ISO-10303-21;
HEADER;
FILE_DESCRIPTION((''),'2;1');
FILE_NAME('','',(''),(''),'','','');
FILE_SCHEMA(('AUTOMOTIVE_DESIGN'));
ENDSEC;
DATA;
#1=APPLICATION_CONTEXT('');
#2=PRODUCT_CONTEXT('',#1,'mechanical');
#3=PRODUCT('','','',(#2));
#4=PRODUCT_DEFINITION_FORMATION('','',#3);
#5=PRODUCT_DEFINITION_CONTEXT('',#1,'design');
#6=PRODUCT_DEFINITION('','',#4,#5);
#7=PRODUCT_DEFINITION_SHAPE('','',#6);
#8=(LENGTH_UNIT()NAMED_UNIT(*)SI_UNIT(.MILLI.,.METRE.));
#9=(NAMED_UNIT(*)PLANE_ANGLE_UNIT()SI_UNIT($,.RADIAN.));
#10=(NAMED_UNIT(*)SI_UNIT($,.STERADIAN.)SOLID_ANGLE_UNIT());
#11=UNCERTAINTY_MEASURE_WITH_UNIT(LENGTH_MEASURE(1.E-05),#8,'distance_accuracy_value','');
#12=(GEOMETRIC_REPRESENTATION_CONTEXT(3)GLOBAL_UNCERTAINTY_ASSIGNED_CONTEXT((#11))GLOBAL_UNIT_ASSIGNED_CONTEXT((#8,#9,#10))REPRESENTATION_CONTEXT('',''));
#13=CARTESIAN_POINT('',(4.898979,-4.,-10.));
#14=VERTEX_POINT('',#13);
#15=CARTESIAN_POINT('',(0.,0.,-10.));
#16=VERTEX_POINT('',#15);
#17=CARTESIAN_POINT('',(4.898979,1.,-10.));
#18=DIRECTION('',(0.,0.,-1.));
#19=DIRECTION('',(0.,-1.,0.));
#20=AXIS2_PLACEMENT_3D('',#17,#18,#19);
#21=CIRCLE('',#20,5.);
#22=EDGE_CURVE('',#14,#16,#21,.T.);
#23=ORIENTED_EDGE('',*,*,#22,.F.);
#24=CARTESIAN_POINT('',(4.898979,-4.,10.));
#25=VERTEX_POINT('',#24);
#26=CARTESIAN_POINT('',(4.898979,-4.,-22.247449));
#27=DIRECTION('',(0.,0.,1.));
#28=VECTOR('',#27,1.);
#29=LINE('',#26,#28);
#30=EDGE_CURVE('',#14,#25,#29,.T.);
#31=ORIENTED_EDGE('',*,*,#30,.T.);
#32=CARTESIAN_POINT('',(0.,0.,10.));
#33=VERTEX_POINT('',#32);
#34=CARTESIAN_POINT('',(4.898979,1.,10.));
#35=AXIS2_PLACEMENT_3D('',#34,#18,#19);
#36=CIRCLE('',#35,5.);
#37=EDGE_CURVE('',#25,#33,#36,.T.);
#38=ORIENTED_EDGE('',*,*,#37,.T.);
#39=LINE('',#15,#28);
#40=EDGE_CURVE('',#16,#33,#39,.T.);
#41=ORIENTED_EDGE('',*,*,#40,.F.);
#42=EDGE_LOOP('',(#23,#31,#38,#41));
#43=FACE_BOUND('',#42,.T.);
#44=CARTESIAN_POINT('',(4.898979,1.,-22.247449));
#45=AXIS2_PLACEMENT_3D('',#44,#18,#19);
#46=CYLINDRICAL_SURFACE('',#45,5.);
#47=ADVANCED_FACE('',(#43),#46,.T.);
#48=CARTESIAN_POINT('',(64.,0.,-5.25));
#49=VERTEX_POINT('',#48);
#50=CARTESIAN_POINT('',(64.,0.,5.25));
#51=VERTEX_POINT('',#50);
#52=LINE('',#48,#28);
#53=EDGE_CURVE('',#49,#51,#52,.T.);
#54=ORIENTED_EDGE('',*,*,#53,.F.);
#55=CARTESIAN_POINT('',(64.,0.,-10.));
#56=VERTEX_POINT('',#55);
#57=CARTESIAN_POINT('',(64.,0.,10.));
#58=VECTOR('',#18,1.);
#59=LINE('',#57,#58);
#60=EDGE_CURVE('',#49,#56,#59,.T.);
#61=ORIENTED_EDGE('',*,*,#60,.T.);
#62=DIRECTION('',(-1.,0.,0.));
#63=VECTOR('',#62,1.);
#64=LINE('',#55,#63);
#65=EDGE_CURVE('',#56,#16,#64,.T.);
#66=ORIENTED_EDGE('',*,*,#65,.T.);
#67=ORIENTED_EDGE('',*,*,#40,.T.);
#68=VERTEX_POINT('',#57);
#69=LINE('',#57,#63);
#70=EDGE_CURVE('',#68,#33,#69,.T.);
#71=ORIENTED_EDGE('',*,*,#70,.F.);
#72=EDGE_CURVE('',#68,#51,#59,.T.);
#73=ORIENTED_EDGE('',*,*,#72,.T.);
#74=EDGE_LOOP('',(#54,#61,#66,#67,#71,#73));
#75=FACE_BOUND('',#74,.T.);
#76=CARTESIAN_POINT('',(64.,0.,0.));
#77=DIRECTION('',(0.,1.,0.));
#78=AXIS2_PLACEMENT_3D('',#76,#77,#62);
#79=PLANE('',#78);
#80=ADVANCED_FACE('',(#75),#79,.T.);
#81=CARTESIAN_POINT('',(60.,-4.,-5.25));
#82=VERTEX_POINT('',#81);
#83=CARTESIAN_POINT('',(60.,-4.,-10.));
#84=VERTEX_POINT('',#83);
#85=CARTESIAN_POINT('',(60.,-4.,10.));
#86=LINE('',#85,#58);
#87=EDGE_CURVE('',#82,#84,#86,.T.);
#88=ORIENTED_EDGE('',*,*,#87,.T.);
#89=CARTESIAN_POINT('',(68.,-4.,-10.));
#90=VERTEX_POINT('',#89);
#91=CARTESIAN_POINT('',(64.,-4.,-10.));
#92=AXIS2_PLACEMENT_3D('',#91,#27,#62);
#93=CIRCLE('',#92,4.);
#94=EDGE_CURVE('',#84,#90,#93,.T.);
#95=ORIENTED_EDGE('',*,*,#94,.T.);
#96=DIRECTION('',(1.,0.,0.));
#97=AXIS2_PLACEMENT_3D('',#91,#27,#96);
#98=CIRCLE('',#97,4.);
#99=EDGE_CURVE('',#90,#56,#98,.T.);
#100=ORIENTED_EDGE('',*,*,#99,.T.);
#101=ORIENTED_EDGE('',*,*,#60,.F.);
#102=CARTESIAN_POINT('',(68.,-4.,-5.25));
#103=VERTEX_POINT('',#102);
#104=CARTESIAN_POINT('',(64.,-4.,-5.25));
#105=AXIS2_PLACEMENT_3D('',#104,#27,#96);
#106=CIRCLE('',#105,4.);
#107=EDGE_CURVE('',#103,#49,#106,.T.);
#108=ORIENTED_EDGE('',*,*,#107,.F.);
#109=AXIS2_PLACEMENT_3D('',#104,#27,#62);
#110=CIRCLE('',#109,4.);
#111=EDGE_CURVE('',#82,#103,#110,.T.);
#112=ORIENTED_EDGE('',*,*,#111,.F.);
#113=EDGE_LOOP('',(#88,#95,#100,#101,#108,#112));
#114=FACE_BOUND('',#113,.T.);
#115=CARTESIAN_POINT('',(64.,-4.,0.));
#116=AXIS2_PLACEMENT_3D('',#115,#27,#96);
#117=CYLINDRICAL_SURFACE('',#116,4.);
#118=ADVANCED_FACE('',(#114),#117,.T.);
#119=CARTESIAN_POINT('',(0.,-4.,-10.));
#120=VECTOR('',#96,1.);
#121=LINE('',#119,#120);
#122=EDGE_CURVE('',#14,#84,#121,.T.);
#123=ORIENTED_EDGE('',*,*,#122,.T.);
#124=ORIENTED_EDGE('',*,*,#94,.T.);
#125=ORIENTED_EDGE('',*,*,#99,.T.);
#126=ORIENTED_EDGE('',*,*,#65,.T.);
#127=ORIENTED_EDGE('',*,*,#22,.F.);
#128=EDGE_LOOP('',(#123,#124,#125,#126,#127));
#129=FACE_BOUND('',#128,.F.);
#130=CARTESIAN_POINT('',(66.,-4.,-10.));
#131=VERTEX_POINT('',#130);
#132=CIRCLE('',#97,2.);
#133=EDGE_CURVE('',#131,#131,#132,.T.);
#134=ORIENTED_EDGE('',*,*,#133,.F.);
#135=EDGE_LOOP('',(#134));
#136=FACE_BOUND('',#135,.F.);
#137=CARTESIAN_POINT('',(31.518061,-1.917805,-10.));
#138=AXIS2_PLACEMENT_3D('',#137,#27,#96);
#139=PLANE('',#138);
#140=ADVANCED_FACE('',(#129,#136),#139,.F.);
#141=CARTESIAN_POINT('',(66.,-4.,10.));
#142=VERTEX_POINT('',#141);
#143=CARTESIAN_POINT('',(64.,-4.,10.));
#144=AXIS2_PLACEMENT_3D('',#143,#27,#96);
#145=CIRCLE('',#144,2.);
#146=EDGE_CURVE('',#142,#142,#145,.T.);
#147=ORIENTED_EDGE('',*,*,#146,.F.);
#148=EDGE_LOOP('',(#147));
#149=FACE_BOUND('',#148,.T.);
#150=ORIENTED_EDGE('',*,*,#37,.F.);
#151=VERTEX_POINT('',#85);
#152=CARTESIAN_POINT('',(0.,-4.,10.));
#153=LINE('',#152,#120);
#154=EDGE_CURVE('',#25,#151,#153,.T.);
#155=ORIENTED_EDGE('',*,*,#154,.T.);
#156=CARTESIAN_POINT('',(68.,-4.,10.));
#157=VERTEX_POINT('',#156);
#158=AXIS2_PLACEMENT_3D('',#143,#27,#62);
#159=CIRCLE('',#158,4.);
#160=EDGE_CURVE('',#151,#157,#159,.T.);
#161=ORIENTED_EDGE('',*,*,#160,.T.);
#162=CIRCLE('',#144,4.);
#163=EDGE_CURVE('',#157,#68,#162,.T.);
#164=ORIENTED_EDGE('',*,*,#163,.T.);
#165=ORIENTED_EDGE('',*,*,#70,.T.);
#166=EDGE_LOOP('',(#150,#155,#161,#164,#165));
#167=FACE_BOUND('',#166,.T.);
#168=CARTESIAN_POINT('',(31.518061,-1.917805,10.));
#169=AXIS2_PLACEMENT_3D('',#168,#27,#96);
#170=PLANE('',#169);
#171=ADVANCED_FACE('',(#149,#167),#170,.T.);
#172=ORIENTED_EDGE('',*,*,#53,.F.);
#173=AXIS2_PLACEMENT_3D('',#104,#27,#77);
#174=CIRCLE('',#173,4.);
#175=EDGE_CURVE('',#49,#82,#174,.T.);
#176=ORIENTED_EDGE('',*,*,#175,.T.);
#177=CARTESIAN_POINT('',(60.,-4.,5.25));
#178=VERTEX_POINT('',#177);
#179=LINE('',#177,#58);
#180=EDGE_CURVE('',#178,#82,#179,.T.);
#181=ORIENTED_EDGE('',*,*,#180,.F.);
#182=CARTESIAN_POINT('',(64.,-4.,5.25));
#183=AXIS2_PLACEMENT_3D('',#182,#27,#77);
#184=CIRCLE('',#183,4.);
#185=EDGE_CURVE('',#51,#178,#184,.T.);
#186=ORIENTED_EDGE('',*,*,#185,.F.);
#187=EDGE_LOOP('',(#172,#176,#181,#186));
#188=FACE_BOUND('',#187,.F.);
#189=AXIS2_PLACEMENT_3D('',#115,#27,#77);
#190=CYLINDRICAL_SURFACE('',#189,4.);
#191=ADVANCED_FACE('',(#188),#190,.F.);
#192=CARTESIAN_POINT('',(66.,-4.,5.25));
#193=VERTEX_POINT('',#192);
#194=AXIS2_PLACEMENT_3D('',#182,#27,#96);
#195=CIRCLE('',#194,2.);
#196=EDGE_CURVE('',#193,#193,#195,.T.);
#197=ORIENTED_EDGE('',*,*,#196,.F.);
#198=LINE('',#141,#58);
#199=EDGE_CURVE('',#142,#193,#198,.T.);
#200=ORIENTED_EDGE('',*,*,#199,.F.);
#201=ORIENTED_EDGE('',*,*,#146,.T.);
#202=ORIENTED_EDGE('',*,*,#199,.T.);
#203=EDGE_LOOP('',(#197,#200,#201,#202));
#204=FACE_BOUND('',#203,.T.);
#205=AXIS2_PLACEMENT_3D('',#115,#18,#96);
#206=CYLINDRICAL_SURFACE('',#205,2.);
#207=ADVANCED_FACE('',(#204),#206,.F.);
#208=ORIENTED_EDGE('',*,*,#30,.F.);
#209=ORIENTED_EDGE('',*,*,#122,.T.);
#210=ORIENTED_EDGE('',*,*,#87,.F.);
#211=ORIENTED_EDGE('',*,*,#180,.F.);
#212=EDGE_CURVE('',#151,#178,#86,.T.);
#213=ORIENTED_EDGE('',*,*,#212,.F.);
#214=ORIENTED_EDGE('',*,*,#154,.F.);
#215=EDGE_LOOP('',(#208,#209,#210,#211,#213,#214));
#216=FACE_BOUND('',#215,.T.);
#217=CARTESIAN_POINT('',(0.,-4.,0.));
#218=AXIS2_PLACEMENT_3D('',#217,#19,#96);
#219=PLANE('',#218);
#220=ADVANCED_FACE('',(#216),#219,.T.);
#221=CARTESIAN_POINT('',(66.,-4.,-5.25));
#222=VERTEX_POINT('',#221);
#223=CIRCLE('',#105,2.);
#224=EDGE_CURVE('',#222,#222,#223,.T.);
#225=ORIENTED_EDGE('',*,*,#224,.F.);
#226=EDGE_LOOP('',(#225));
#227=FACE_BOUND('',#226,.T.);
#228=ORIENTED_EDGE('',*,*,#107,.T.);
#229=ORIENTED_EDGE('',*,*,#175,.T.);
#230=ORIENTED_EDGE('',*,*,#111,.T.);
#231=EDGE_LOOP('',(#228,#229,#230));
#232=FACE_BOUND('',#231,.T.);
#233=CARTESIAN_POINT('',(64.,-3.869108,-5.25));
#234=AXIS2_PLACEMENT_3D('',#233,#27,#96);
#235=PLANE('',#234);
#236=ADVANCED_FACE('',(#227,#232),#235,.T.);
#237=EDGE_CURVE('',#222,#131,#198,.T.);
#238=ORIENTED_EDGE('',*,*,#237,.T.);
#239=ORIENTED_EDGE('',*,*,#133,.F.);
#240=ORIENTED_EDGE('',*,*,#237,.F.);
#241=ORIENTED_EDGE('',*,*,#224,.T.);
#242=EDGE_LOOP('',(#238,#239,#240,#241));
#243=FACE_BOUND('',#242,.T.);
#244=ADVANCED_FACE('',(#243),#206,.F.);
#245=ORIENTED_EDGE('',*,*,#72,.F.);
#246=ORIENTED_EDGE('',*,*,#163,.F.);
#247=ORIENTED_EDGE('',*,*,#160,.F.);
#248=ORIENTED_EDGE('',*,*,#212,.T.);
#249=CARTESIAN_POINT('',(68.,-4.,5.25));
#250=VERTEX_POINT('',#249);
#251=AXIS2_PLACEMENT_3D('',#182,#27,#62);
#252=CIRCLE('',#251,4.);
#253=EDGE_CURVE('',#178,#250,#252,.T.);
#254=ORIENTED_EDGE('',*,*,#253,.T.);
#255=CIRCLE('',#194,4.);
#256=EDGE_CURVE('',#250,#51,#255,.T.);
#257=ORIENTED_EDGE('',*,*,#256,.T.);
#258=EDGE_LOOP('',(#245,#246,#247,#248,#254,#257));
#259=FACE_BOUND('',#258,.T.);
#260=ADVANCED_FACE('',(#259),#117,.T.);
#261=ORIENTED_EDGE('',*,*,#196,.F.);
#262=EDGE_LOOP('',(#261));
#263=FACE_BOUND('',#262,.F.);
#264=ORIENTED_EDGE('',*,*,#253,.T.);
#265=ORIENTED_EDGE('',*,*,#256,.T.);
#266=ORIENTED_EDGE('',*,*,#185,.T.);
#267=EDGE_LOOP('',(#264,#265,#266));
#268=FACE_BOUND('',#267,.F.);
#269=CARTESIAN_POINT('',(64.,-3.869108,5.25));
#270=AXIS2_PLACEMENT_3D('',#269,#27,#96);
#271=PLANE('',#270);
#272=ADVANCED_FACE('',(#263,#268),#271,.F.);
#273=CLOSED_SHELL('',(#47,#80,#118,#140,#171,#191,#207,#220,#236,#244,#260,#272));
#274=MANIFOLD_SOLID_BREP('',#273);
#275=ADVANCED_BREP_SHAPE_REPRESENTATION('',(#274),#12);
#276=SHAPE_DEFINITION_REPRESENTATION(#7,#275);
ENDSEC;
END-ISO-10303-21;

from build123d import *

# Parameters (mm, degrees)
F0_R        = 2
F1_DEPTH    = 10
F2_DEPTH    = 5.25
F3_T1_DEPTH = 44.4948974279


# Not quite as in the source:
# - a fillet or chamfer that OpenCascade refuses, or shapes differently, is made with other operations: its cross-section is extruded or revolved along the edge and cut away or added


with BuildPart() as f1:
    # F0 (on Top) → F1 (new body, symmetric)
    with BuildSketch(Plane.XY):
        with BuildLine():
            Line((64, 0), (0, 0))
            Line((0, 0), (0, -4))
            Line((0, -4), (60, -4))
            ThreePointArc((60, -4), (61.1715728753, -1.1715728753), (64, 0))
        make_face()
        with BuildLine():
            ThreePointArc((68, -4), (66.8284271247, -1.1715728753), (64, 0))
            ThreePointArc((64, 0), (61.1715728753, -1.1715728753), (60, -4))
            ThreePointArc((60, -4), (64, -8), (68, -4))
        make_face()
        with Locations((64, -4)):
            Circle(F0_R, mode=Mode.SUBTRACT)
    extrude(amount=F1_DEPTH, both=True)

    # F0 (on Top) → F2 (cut, symmetric)
    with BuildSketch(Plane.XY):
        with BuildLine():
            ThreePointArc((68, -4), (66.8284271247, -1.1715728753), (64, 0))
            ThreePointArc((64, 0), (61.1715728753, -1.1715728753), (60, -4))
            ThreePointArc((60, -4), (64, -8), (68, -4))
        make_face()
        with Locations((64, -4)):
            Circle(F0_R, mode=Mode.SUBTRACT)
    extrude(amount=F2_DEPTH, both=True, mode=Mode.SUBTRACT)

    # F3: fillet of radius 5 on 1 edges, made by hand

    # F3_s2 → F3_t1 (cut)
    with BuildSketch(Plane.XY.offset(-22.2474487139)):
        with BuildLine():
            ThreePointArc((4.8989794856, -4), (1.7367018254, -2.8729833462), (0, 0))
            Line((0, 0), (0, -4))
            Line((0, -4), (4.8989794856, -4))
        make_face()
    extrude(amount=F3_T1_DEPTH, mode=Mode.SUBTRACT)


solid = f1.part
